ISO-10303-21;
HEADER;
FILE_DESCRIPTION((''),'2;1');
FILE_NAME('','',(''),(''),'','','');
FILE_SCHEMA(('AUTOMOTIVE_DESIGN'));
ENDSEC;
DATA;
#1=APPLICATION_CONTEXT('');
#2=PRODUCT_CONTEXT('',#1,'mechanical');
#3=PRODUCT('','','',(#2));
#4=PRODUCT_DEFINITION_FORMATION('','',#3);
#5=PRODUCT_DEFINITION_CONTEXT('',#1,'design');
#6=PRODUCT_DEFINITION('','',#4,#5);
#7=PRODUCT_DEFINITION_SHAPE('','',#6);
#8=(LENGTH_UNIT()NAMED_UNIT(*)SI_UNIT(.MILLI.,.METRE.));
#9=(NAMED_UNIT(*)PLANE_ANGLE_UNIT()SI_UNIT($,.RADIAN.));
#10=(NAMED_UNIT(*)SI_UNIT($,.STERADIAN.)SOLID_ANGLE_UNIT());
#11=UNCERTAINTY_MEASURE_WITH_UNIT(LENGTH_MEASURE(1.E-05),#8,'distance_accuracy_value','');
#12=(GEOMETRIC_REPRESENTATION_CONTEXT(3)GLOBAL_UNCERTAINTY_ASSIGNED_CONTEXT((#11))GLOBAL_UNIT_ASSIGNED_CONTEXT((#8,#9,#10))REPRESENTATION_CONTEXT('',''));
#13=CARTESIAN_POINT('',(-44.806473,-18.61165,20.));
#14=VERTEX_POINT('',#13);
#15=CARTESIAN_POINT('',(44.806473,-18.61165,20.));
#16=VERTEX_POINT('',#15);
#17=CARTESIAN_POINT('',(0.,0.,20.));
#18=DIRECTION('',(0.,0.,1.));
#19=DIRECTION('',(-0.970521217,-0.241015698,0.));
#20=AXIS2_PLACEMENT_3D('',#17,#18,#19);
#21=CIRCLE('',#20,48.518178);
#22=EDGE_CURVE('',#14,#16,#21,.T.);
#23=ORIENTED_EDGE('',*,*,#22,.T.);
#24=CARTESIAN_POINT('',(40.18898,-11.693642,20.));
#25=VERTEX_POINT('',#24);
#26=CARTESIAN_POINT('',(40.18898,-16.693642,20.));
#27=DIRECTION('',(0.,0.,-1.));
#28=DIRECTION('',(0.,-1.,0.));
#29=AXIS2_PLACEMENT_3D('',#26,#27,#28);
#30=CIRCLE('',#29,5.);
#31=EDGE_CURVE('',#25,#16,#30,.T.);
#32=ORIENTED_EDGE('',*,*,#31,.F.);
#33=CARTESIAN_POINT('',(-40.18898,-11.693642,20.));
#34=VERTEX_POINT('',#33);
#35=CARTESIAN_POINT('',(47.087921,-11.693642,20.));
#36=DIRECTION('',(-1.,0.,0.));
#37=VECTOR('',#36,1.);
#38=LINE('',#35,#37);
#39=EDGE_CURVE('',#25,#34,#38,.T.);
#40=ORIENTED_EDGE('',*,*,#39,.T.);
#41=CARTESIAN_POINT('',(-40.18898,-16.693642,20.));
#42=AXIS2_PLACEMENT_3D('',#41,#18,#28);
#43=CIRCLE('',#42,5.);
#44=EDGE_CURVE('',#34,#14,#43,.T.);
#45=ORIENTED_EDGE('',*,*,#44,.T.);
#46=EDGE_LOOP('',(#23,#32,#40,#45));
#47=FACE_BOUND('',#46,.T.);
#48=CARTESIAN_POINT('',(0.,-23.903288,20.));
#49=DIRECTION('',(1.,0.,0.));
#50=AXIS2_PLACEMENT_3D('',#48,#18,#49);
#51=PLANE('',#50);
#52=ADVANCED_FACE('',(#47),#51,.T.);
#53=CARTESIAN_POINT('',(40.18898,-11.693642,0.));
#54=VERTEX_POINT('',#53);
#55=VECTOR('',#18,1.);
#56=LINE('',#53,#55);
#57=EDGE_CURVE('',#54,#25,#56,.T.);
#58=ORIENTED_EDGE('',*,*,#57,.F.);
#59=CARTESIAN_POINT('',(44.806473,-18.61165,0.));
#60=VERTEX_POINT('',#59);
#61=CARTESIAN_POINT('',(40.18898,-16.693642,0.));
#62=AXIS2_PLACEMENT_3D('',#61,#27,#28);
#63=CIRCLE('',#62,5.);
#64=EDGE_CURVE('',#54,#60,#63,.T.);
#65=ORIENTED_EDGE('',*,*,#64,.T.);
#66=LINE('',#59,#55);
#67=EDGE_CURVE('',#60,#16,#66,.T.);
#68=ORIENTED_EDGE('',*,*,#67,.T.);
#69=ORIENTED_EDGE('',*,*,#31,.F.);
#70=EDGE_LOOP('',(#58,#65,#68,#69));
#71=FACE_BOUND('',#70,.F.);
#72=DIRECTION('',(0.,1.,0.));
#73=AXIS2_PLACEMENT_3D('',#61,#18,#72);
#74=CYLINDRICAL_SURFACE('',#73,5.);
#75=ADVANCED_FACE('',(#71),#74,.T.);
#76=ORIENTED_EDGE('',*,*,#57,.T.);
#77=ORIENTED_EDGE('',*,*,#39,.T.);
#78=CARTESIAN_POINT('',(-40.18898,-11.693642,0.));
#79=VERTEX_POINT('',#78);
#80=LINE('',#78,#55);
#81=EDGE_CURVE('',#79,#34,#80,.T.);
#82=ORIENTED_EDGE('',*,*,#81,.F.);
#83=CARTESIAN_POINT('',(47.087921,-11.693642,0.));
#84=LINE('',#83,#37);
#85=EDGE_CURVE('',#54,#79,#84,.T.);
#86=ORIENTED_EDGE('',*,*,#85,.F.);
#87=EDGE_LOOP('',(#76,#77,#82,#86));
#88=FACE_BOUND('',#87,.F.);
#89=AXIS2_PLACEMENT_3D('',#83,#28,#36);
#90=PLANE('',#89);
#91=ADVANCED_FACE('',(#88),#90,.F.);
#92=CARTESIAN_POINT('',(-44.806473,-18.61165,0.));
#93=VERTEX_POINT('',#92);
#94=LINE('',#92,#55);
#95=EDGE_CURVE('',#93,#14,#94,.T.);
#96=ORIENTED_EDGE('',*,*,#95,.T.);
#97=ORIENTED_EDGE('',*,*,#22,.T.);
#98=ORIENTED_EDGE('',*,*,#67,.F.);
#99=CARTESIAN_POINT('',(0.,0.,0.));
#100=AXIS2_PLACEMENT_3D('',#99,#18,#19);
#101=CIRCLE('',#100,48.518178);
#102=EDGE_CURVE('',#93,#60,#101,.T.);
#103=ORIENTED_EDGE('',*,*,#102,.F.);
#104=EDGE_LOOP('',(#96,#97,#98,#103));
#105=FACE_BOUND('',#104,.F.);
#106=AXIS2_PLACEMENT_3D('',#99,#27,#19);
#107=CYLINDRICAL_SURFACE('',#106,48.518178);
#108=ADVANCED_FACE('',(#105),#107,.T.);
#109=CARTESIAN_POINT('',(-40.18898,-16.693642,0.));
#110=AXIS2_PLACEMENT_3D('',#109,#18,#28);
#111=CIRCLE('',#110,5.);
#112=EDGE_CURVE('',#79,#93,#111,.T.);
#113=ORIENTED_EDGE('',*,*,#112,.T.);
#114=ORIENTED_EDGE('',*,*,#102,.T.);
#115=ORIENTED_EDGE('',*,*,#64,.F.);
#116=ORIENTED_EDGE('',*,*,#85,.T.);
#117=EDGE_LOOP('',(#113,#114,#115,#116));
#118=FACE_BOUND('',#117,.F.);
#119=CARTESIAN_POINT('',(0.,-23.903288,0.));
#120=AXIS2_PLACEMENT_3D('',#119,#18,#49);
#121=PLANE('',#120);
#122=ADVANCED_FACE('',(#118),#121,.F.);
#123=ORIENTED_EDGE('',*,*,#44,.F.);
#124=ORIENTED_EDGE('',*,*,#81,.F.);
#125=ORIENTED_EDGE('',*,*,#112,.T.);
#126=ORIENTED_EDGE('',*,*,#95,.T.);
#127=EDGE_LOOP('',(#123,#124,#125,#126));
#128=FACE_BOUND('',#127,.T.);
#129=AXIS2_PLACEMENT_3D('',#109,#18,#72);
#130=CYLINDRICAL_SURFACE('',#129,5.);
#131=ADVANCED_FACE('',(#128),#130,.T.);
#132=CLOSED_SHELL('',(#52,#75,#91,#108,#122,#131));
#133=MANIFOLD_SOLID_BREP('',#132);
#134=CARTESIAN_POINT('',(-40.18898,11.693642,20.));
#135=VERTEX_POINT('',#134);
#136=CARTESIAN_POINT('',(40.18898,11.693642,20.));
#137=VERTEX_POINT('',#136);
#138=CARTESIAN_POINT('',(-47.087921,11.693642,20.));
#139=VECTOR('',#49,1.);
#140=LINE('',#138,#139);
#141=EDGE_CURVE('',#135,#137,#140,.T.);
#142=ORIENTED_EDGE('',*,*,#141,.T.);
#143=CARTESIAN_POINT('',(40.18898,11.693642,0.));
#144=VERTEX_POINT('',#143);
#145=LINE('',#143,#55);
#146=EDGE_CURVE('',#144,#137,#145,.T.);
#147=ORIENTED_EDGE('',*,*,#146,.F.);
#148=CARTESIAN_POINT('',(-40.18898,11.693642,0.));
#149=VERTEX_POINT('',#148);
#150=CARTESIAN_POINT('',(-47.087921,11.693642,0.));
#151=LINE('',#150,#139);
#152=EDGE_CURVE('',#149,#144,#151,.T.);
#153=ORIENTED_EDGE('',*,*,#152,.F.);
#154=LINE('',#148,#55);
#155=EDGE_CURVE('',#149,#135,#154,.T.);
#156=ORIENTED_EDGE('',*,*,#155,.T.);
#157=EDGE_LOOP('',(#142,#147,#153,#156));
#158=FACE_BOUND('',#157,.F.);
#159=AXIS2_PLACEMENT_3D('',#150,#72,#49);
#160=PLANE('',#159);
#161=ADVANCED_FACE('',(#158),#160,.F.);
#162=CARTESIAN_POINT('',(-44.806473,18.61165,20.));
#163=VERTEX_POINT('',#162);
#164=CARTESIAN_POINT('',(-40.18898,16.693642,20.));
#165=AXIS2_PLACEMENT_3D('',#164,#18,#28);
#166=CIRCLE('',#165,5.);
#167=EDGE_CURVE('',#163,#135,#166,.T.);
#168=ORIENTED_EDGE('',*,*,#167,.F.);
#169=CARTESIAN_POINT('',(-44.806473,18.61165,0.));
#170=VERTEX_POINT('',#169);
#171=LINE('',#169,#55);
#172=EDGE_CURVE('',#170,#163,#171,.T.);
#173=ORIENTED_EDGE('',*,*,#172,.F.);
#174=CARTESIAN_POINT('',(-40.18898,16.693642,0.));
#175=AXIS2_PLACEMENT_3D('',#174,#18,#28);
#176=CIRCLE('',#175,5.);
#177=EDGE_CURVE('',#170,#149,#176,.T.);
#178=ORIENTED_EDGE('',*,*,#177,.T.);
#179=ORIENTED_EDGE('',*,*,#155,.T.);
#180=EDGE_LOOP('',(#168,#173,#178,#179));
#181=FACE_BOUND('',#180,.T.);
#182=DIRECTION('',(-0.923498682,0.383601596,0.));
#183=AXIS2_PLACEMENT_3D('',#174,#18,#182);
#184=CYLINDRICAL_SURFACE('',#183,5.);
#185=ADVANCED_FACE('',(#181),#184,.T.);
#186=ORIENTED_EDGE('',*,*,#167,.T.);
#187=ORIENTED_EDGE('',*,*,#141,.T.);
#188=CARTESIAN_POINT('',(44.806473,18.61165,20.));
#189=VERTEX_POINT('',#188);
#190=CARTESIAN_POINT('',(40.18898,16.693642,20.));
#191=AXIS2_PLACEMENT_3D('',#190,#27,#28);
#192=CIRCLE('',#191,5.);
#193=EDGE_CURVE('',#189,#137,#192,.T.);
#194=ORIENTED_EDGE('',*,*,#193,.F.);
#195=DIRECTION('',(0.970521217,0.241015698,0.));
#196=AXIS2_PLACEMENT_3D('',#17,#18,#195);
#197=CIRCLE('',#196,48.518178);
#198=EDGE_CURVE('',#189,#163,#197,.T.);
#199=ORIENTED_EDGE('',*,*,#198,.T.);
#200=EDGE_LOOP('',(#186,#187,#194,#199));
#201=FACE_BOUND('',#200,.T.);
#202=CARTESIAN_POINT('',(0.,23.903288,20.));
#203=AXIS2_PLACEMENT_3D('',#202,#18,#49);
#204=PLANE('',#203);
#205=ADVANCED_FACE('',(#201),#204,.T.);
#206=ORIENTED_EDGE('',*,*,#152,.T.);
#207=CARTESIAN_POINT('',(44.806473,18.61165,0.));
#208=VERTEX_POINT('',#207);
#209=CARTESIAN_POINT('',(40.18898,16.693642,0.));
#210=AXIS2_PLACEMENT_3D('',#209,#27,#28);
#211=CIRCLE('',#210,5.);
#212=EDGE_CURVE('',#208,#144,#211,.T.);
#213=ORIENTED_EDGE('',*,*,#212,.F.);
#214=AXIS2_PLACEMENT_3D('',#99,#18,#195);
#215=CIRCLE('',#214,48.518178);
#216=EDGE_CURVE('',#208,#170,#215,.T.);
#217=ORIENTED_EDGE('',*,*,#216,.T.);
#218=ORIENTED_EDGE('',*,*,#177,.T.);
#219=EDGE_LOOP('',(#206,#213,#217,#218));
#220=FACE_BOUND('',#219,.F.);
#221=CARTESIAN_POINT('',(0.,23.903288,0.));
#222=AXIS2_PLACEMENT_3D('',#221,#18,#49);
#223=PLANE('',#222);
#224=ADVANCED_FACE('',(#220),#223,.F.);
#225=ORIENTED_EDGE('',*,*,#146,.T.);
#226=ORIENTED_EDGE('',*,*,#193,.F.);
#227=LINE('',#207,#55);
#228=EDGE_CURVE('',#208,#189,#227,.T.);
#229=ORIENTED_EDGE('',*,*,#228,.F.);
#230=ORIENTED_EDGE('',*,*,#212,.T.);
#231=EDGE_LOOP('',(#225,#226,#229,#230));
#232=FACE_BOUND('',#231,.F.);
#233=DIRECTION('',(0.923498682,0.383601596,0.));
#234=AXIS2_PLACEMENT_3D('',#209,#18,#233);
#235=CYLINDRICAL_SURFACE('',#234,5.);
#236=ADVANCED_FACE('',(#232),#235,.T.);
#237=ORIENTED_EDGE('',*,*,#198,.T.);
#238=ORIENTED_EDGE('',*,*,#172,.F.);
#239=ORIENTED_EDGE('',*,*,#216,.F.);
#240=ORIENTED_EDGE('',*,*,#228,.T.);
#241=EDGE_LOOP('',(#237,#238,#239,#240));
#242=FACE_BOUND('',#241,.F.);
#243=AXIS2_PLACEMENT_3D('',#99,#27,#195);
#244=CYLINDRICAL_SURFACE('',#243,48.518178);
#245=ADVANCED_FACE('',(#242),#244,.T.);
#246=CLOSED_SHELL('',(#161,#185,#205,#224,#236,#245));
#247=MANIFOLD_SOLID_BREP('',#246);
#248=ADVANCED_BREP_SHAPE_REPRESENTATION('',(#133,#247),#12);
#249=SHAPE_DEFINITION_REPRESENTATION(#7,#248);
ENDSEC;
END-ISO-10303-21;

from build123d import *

# Parameters (mm, degrees)
F1_DEPTH = 20
F2_R     = 5
F2_2_R   = 5


with BuildPart() as f1:
    # F0 (on Top) → F1 (new body)
    with BuildSketch(Plane.XY):
        with BuildLine():
            Line((47.0879210033, -11.6936424747), (-47.0879210033, -11.6936424747))
            ThreePointArc((-47.0879210033, -11.6936424747), (0, -48.5181778176), (47.0879210033, -11.6936424747))
        make_face()
    extrude(amount=F1_DEPTH)

    # F2
    f2_edges = [f1.edges().sort_by_distance(p)[0] for p in [
        (-47.087921, -11.693642, 10),
        (47.087921, -11.693642, 10),
    ]]
    fillet(f2_edges, radius=F2_R)


with BuildPart() as f1b:
    # F0 (on Top) → F1, piece 2 (new body)
    with BuildSketch(Plane.XY):
        with BuildLine():
            ThreePointArc((47.0879210033, 11.6936424747), (0, 48.5181778176), (-47.0879210033, 11.6936424747))
            Line((-47.0879210033, 11.6936424747), (47.0879210033, 11.6936424747))
        make_face()
    extrude(amount=F1_DEPTH)

    # F2#2
    f2_2_edges = [f1b.edges().sort_by_distance(p)[0] for p in [
        (-47.087921, 11.693642, 10),
        (47.087921, 11.693642, 10),
    ]]
    fillet(f2_2_edges, radius=F2_2_R)


solid = Compound([f1.part, f1b.part])
